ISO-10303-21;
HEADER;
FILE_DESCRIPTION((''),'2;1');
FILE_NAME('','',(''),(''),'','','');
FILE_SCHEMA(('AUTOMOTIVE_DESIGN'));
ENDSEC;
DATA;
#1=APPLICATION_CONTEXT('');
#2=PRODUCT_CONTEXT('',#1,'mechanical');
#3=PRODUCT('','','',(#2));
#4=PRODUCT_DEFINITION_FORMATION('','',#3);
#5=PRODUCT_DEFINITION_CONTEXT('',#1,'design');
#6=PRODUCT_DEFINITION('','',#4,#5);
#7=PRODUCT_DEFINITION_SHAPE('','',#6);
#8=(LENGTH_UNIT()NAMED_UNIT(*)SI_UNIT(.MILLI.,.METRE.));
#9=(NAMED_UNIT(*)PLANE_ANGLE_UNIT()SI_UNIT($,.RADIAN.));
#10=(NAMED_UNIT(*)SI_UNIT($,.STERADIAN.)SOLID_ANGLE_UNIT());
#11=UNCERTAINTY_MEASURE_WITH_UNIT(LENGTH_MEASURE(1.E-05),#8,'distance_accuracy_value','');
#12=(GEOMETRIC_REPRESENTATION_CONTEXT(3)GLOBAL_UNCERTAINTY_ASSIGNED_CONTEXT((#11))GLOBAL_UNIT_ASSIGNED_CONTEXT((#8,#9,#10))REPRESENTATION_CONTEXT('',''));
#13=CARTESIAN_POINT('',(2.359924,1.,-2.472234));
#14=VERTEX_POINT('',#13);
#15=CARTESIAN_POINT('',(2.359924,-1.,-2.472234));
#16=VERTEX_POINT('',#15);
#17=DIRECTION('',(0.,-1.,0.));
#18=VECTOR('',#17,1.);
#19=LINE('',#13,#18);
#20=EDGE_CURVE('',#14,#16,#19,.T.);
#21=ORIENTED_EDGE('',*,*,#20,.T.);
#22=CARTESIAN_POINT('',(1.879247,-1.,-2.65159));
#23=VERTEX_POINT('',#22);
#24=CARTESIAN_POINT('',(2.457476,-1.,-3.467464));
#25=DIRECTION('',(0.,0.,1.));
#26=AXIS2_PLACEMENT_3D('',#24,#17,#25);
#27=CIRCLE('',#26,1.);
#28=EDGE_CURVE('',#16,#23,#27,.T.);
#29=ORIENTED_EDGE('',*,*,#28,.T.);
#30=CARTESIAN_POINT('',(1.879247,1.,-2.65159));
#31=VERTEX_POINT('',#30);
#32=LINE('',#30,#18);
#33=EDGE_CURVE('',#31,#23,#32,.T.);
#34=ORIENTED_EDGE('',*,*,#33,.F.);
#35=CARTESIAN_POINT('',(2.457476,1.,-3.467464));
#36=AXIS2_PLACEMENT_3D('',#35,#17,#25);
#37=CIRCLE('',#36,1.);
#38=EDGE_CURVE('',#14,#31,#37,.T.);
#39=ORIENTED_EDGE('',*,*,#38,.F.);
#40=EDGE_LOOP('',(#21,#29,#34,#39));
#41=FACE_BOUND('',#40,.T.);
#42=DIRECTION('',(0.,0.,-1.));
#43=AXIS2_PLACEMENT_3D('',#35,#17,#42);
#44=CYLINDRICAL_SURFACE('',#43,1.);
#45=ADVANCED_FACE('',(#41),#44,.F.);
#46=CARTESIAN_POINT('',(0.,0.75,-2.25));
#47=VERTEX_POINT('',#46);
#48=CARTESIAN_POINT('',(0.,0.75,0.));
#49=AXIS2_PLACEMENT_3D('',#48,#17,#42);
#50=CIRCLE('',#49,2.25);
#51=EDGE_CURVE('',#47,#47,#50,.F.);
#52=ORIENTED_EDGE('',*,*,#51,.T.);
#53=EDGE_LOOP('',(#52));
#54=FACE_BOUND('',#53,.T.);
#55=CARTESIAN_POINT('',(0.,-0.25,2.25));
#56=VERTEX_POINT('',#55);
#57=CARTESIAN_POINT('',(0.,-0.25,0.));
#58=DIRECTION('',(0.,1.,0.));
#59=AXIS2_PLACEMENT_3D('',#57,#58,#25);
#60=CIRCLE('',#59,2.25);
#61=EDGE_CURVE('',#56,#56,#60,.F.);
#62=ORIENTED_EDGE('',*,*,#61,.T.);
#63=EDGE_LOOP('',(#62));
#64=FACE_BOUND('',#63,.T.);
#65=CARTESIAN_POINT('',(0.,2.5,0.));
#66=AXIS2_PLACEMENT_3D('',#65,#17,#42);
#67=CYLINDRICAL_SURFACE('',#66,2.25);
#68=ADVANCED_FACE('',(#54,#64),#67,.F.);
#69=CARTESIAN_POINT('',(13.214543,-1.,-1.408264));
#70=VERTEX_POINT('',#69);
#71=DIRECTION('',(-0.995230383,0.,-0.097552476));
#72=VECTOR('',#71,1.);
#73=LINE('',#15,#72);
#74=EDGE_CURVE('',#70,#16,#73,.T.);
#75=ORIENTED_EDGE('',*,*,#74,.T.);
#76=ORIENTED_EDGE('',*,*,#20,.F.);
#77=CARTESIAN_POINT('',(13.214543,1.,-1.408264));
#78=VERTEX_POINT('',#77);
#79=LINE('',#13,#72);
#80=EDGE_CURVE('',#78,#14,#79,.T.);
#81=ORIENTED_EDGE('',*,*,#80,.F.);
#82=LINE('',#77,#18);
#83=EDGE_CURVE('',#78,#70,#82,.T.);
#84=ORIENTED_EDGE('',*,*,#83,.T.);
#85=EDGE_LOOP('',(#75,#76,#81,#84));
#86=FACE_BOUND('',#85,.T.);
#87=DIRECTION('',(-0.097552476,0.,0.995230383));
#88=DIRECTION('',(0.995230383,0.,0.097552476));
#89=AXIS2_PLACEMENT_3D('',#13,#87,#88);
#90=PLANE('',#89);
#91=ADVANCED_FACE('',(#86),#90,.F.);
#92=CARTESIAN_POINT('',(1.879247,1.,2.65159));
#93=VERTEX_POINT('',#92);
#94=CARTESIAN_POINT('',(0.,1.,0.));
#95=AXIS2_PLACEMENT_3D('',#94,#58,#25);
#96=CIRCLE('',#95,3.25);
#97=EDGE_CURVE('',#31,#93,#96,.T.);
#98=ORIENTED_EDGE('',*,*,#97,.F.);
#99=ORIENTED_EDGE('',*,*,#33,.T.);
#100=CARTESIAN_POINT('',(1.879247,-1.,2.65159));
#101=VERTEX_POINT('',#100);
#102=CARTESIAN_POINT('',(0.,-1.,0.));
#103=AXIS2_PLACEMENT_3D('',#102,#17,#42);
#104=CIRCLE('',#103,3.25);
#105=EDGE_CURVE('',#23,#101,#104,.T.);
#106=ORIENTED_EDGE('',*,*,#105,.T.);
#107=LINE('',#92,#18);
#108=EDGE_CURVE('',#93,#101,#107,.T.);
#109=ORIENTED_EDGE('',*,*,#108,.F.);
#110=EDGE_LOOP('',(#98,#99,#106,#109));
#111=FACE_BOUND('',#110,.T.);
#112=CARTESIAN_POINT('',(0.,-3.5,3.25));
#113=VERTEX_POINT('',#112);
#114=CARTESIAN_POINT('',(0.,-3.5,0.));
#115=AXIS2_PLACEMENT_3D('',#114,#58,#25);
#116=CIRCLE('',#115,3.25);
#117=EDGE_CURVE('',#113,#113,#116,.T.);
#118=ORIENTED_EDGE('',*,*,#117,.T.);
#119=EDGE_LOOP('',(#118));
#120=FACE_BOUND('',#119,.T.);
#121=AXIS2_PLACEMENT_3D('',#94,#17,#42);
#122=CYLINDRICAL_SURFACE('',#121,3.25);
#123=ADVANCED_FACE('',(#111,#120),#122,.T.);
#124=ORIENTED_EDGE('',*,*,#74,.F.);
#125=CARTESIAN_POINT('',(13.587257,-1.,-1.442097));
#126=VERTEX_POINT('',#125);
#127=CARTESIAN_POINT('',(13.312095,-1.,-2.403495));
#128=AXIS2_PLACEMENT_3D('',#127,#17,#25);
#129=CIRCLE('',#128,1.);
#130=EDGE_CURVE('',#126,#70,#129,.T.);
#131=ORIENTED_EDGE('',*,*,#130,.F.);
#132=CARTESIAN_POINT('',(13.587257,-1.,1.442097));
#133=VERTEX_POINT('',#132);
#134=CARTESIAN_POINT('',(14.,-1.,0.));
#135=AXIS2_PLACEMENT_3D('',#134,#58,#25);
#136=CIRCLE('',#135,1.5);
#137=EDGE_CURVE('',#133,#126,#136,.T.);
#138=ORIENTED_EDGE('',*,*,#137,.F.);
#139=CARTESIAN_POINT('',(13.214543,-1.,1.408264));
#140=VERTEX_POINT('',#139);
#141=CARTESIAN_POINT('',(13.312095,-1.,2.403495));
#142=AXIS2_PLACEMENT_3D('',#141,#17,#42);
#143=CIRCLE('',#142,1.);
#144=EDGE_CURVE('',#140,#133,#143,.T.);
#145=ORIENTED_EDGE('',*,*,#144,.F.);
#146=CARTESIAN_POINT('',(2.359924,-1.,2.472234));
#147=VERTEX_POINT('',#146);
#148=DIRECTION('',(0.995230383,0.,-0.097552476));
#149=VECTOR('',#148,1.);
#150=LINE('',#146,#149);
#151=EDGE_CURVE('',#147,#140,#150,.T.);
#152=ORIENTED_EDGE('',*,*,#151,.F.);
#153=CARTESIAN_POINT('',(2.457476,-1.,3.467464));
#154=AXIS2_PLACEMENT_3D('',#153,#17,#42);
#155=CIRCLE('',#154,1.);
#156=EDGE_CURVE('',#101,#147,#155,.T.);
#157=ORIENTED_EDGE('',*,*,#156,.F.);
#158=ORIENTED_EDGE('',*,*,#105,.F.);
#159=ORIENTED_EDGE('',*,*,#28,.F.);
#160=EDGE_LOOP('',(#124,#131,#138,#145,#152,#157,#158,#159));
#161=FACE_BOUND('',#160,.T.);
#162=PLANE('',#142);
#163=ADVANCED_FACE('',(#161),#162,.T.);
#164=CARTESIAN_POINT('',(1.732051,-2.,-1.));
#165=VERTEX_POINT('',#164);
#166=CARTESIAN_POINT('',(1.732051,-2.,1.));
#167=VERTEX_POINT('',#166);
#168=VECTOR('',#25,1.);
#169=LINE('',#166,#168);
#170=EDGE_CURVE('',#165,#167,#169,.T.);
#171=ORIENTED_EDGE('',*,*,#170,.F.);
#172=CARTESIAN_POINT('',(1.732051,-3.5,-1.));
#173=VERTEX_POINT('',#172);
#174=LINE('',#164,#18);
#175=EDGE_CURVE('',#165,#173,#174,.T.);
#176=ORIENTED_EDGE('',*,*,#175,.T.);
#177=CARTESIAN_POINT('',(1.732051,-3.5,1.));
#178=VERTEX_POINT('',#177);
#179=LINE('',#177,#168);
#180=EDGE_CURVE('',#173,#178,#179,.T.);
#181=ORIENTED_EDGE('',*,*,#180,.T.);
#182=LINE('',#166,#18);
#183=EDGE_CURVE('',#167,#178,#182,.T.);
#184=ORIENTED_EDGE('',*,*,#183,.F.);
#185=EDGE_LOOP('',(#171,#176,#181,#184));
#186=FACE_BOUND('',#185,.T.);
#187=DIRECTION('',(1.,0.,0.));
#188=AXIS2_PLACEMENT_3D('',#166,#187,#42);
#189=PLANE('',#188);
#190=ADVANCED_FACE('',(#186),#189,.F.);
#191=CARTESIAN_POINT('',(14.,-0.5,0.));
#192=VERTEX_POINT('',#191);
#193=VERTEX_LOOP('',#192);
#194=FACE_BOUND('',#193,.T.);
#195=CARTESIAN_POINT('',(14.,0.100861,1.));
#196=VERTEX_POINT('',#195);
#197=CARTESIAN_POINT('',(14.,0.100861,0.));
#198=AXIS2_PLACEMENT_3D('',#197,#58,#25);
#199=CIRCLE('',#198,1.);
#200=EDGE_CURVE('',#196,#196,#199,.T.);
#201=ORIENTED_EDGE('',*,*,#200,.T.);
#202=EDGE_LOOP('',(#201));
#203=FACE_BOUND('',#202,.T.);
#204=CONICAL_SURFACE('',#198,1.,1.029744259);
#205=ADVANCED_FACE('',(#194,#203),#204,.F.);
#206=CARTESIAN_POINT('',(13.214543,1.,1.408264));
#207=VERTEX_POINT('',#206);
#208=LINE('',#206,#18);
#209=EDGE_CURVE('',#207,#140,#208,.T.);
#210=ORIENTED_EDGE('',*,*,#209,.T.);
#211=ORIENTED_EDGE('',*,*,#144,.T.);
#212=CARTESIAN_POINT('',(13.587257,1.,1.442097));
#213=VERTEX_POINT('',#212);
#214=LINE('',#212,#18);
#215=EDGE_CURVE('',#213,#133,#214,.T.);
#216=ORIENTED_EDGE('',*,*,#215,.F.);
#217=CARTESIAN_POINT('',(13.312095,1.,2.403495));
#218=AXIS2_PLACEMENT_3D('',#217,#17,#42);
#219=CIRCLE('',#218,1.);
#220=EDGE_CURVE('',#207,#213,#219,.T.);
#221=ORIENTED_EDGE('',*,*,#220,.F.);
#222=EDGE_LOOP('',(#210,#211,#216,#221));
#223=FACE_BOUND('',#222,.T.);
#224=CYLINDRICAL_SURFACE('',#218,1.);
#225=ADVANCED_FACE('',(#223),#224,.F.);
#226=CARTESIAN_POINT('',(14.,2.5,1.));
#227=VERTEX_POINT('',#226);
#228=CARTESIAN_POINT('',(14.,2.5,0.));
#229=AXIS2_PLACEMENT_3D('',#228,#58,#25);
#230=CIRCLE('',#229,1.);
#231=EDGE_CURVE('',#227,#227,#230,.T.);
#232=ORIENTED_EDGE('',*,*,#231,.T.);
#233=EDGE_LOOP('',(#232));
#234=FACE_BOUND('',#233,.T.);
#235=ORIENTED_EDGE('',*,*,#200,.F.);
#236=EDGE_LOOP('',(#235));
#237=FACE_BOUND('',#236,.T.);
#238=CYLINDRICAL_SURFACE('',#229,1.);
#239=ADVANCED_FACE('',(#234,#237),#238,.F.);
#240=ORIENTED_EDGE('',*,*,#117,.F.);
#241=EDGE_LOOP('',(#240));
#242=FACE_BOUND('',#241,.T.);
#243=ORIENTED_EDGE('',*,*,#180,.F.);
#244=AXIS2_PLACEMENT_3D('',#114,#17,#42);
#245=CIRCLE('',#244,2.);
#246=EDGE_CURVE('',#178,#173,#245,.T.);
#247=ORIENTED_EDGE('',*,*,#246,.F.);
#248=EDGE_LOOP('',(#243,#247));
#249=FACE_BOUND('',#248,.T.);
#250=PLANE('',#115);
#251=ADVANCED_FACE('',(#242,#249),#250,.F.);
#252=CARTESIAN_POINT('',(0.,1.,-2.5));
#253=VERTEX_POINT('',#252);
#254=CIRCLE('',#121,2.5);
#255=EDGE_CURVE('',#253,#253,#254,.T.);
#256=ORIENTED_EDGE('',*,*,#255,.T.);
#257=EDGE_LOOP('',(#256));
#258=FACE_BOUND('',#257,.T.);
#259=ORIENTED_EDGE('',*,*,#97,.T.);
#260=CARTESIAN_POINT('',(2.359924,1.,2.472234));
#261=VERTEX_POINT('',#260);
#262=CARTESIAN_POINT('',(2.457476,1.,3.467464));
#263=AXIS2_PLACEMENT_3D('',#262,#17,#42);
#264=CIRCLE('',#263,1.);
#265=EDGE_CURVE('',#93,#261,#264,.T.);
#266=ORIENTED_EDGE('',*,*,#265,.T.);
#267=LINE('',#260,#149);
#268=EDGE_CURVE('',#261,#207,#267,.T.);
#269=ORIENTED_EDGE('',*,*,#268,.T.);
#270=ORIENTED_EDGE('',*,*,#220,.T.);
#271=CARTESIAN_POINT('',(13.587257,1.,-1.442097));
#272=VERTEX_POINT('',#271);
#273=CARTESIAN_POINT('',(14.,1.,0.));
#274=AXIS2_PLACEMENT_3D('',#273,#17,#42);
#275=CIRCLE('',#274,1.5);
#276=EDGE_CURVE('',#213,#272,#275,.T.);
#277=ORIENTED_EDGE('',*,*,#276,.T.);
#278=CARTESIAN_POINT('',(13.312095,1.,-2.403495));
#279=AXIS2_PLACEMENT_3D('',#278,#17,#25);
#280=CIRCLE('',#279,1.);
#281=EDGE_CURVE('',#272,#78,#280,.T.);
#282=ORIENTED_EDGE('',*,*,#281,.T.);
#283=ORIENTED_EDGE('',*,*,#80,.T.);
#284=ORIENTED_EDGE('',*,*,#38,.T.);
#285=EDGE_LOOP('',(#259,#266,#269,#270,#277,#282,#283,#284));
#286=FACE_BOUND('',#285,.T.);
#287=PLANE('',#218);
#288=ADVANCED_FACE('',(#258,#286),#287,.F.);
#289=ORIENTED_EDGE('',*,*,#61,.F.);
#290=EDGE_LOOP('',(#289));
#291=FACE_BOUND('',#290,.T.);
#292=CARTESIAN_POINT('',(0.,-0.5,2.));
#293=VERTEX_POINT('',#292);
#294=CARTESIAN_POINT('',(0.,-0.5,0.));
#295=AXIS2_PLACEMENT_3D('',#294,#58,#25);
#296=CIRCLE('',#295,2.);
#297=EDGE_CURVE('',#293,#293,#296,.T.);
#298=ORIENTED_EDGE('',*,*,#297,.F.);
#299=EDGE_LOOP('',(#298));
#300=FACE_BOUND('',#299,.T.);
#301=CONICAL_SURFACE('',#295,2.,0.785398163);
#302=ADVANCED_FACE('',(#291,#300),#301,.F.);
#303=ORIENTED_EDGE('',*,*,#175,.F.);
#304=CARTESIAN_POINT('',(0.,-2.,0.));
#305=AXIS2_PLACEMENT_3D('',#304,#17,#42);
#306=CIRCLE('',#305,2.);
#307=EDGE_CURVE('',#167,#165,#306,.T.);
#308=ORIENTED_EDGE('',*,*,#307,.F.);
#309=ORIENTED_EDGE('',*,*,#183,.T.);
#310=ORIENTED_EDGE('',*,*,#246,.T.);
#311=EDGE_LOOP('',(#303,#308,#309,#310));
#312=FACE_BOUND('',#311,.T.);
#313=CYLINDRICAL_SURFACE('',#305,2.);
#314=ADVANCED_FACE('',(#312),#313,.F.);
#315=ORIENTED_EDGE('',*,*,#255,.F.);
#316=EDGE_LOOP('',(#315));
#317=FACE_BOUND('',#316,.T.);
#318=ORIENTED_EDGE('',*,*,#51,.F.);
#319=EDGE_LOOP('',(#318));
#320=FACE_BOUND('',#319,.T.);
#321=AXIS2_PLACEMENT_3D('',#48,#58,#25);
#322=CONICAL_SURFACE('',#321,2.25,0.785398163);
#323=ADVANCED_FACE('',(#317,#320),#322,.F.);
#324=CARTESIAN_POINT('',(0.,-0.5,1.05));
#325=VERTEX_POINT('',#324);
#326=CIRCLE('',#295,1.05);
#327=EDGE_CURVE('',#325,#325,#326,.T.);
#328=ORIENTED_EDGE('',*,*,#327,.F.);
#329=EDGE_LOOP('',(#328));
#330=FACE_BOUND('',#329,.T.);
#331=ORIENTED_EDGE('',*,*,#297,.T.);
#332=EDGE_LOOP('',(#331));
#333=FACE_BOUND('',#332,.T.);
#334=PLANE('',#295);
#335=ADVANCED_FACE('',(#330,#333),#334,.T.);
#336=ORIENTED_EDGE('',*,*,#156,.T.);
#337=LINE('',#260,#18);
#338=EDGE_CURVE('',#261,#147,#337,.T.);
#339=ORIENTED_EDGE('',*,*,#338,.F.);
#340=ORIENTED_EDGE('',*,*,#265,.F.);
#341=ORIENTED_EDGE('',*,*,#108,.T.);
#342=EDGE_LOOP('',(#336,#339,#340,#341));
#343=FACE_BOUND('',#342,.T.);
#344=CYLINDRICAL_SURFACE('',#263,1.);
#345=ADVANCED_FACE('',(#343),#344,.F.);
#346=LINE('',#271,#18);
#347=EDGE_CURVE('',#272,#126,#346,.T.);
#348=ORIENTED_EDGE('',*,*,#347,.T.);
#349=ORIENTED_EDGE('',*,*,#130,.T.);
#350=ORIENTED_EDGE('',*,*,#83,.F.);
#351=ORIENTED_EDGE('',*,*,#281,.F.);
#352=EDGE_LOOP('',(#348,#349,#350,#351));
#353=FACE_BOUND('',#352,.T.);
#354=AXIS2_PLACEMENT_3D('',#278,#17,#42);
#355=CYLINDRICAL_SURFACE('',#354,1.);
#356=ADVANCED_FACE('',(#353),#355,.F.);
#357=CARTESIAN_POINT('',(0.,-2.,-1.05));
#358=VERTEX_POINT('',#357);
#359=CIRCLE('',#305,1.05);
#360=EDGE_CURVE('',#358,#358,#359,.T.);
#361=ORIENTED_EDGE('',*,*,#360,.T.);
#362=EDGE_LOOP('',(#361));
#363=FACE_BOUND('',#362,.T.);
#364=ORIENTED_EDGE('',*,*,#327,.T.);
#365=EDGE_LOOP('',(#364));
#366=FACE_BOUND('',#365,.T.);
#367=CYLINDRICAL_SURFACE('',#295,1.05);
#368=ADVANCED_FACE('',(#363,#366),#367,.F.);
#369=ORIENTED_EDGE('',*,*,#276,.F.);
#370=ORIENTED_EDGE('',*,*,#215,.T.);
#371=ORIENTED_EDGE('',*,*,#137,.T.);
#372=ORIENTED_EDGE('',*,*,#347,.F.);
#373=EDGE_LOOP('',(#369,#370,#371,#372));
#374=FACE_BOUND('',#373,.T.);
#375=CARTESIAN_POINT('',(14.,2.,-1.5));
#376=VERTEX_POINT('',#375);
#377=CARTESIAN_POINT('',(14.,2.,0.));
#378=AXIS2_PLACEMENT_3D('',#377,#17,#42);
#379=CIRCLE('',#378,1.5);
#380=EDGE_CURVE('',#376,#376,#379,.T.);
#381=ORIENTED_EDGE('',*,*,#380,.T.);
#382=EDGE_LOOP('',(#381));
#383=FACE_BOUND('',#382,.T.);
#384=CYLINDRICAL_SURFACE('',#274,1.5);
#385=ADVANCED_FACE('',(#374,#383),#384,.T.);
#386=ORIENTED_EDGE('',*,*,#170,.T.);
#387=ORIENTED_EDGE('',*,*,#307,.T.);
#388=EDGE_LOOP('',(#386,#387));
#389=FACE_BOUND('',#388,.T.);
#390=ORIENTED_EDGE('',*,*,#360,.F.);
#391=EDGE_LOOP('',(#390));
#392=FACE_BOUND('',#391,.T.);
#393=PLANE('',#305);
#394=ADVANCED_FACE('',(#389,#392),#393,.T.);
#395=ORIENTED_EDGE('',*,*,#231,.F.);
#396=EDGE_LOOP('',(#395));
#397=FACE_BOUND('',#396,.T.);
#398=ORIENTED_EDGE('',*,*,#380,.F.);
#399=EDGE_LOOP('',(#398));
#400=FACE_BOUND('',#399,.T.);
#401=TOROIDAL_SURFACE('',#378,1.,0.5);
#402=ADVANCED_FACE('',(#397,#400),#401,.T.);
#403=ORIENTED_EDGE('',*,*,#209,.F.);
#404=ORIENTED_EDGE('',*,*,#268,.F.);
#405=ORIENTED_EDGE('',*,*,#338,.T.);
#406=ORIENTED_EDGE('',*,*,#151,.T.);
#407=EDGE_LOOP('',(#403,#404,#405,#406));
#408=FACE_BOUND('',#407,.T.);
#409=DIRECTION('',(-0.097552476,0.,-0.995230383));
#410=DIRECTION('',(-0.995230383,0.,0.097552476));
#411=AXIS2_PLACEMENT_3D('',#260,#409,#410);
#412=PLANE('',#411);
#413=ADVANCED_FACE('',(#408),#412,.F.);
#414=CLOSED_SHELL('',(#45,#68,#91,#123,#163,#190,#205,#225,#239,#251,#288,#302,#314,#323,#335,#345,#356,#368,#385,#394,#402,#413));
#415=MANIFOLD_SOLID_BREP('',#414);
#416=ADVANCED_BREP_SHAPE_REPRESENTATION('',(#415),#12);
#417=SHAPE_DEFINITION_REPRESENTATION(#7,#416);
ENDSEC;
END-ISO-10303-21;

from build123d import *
from build123d.topology import SkipClean

# Parameters (mm, degrees)
BOSS_EXTRUDE1_DEPTH       = 1
SKETCH2_R                 = 3.25
BOSS_EXTRUDE2_DEPTH       = 4.5
BOSS_EXTRUDE3_START       = -3.5
SKETCH3_R                 = 1.5
BOSS_EXTRUDE3_DEPTH       = 3.5
F_2_0MM_DOWEL_HOLE2_D     = 2
F_2_0MM_DOWEL_HOLE2_DEPTH = 2.399139
F_2_0MM_DOWEL_HOLE2_TIP   = 0.600861
FILLET1_R                 = 0.5
CUT_EXTRUDE1_DEPTH        = 17.463976
CUT_EXTRUDE1_DEPTH_BACK   = 1.5
SKETCH10_R                = 2.25
CUT_EXTRUDE2_DEPTH        = 1.5
CHAMFER1_SIZE             = 0.25
F_2_0MM_DOWEL_HOLE1_D     = 2.1


with BuildPart() as part:
    # Sketch1 → Boss-Extrude1 (new, symmetric)
    with BuildSketch(Plane(origin=(0, 0, 0), x_dir=(1, 0, 0), z_dir=(0, 1, 0))):
        with BuildLine():
            Line((2.359924, 2.472234), (13.214543, 1.408264))
            ThreePointArc((13.214543, 1.408264), (13.402497, 1.407589), (13.587257, 1.442097))
            ThreePointArc((13.587257, 1.442097), (15.5, 0), (13.587257, -1.442097))
            ThreePointArc((13.587257, -1.442097), (13.402497, -1.407589), (13.214543, -1.408264))
            Line((13.214543, -1.408264), (2.359924, -2.472234))
            ThreePointArc((2.359924, -2.472234), (2.107887, -2.530561), (1.879247, -2.65159))
            ThreePointArc((1.879247, -2.65159), (-3.25, 0), (1.879247, 2.65159))
            ThreePointArc((1.879247, 2.65159), (2.107887, 2.530561), (2.359924, 2.472234))
        make_face()
    extrude(amount=BOSS_EXTRUDE1_DEPTH, both=True)

    # Sketch2 → Boss-Extrude2 (add)
    with SkipClean():  # the faces are left unmerged after this step: merging them gives an invalid solid
        with BuildSketch(Plane(origin=(0, 1, 0), x_dir=(1, 0, 0), z_dir=(0, 1, 0))):
            with Locations(Location((0, 0, 0), (0, 0, 54.673872))):
                Circle(SKETCH2_R)
        extrude(amount=-BOSS_EXTRUDE2_DEPTH)

    # Sketch3 → Boss-Extrude3 (add)
    with SkipClean():  # the faces are left unmerged after this step: merging them gives an invalid solid
        with BuildSketch(Plane.XZ.offset(1).offset(BOSS_EXTRUDE3_START)):
            with Locations(Location((14, 0, 0), (0, 0, 270))):
                Circle(SKETCH3_R)
        extrude(amount=BOSS_EXTRUDE3_DEPTH)

    # Ø2.0mm Dowel Hole2
    with Locations(Plane(origin=(0, 2.5, 0), x_dir=(1, 0, 0), z_dir=(0, 1, 0))):
        with Locations((14, 0)):
            Hole(F_2_0MM_DOWEL_HOLE2_D / 2, depth=F_2_0MM_DOWEL_HOLE2_DEPTH)
            with Locations((0, 0, -(F_2_0MM_DOWEL_HOLE2_DEPTH + F_2_0MM_DOWEL_HOLE2_TIP / 2))):  # 118° drill point
                Cone(0, F_2_0MM_DOWEL_HOLE2_D / 2, F_2_0MM_DOWEL_HOLE2_TIP, mode=Mode.SUBTRACT)

    # Fillet1
    fillet1_edges = [part.edges().sort_by_distance(p)[0] for p in [
        (14, 2.5, 1.5),
    ]]
    fillet(fillet1_edges, radius=FILLET1_R - 0.0001)  # a hair under: the kernel refuses the full size

    # Sketch10 → Cut-Extrude1 (cut, two sides: drawn at the far end of the back side and taken through both)
    with BuildSketch(Plane(origin=(0, 1, 0), x_dir=(1, 0, 0), z_dir=(0, 1, 0)).offset(-CUT_EXTRUDE1_DEPTH_BACK)):
        with Locations(Location((0, 0, 0), (0, 0, 90))):
            Circle(SKETCH10_R)
    extrude(amount=CUT_EXTRUDE1_DEPTH + CUT_EXTRUDE1_DEPTH_BACK, mode=Mode.SUBTRACT)

    # Sketch12 → Cut-Extrude2 (cut)
    with BuildSketch(Plane.XZ.offset(3.5)):
        with BuildLine():
            Line((1.732051, 1), (1.732051, -1))
            ThreePointArc((1.732051, -1), (-2, 0), (1.732051, 1))
        make_face()
    extrude(amount=-CUT_EXTRUDE2_DEPTH, mode=Mode.SUBTRACT)

    # Chamfer1
    chamfer1_edges = [part.edges().sort_by_distance(p)[0] for p in [
        (0, -0.5, 2.25),
        (0, 1, 2.25),
    ]]
    chamfer(chamfer1_edges, length=CHAMFER1_SIZE)

    # Ø2.0mm Dowel Hole1 (through all)
    with Locations(Plane(origin=(0, -0.5, 0), x_dir=(1, 0, 0), z_dir=(0, 1, 0))):
        with Locations((0, 0)):
            Hole(F_2_0MM_DOWEL_HOLE1_D / 2)


solid = part.part
